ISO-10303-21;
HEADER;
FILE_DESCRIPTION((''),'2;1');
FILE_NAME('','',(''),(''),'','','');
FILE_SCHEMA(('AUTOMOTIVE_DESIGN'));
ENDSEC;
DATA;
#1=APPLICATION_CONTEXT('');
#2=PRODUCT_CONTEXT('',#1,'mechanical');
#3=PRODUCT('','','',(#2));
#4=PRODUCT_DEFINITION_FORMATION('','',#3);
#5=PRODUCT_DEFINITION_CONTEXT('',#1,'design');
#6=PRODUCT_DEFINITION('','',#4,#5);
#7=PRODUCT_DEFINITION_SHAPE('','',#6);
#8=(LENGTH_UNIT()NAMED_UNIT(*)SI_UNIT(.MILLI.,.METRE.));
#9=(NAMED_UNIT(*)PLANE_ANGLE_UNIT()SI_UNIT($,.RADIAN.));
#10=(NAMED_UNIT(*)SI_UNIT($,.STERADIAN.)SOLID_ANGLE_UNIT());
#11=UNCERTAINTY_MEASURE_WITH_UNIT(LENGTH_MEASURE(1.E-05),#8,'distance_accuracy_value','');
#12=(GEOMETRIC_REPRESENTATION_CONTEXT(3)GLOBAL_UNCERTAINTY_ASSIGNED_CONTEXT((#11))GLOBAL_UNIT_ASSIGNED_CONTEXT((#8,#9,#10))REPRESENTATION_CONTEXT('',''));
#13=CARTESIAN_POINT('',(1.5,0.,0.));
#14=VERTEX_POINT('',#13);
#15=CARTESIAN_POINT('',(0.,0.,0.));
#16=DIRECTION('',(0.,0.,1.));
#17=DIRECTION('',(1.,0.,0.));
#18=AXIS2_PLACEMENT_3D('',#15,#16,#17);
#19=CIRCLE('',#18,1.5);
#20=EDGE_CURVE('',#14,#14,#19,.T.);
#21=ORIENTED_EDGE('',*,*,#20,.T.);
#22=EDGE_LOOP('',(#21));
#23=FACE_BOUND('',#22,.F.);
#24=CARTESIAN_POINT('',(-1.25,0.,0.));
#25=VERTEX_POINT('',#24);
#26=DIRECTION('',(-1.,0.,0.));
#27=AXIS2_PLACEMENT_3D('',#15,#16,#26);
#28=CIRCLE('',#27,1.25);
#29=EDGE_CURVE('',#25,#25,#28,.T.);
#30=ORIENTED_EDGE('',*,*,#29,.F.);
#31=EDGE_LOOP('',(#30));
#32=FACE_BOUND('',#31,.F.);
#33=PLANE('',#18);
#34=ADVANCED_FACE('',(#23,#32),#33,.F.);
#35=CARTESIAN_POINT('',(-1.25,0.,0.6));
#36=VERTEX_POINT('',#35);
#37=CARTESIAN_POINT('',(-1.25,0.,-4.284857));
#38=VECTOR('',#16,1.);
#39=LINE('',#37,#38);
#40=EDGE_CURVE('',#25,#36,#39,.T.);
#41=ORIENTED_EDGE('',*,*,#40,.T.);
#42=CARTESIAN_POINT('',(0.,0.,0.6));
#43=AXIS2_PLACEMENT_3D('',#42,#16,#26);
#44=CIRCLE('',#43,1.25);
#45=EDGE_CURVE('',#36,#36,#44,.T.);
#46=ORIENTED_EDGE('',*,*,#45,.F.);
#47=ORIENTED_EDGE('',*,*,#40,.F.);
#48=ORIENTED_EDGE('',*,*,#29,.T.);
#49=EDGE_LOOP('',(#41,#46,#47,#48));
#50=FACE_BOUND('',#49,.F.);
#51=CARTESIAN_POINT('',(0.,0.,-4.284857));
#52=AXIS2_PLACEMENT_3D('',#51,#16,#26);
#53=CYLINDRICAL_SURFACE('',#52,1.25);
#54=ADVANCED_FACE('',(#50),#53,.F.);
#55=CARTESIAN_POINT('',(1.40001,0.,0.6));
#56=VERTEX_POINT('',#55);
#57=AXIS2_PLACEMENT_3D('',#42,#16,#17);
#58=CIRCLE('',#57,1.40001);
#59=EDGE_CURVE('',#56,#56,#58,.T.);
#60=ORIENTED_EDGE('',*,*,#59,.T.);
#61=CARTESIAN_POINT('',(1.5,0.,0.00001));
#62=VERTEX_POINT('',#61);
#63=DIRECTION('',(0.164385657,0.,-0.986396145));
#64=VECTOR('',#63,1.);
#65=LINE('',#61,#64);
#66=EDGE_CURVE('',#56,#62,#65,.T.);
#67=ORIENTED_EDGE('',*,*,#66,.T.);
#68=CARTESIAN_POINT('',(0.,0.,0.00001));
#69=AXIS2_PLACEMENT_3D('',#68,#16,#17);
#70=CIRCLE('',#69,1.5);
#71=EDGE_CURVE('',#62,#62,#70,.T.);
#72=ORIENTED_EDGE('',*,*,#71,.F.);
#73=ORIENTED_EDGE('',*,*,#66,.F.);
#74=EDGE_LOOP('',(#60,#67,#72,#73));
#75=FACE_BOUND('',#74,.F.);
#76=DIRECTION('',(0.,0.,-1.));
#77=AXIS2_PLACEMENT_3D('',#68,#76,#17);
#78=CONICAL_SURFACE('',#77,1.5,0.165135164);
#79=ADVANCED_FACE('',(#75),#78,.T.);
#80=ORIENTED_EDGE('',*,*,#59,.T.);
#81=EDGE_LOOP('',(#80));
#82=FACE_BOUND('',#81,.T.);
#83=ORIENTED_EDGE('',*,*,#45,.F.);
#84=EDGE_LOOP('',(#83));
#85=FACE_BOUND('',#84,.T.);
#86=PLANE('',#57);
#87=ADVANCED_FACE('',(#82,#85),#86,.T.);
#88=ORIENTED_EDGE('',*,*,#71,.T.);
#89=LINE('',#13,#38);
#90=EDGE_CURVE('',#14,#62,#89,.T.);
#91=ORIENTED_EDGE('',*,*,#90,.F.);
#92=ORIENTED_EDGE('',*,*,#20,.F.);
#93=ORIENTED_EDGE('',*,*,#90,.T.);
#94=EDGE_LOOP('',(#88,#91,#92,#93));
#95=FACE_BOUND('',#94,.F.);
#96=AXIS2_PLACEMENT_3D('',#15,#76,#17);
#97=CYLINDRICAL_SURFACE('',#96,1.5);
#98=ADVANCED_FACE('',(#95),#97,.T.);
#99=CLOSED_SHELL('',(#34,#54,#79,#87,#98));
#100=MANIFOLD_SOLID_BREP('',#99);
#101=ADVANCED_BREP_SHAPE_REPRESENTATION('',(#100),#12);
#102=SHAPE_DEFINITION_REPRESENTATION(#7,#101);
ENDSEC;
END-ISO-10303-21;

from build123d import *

# Parameters (mm, degrees)
F0_R     = 1.5
F1_DEPTH = 0.6
F2_D     = 2.5
F3_SIZE2 = 0.59999
F3_SIZE  = 0.09999


# Not quite as in the source:
# - a fillet or chamfer is up to 0.001 mm smaller than in the source, because OpenCascade refuses the exact size


with BuildPart() as f1:
    # F0 (on Top) → F1 (new body)
    with BuildSketch(Plane.XY):
        Circle(F0_R)
    extrude(amount=F1_DEPTH)

    # F2 (through all)
    with Locations(Plane(origin=(0, 0, 0), x_dir=(1, 0, 0), z_dir=(0, 0, -1))):
        with Locations((0, 0)):
            Hole(F2_D / 2)

    # F3 (size 0.1 and 0.6 in the source; OpenCascade refuses exactly that, so slightly less here)
    f3_edges = [f1.edges().sort_by_distance(p)[0] for p in [
        (-1.5, 0, 0.6),
    ]]
    f3_side = f1.faces().sort_by_distance((-1.457574, 0, 0.6))[0]
    chamfer(f3_edges, length=F3_SIZE, length2=F3_SIZE2, reference=f3_side)


solid = f1.part
